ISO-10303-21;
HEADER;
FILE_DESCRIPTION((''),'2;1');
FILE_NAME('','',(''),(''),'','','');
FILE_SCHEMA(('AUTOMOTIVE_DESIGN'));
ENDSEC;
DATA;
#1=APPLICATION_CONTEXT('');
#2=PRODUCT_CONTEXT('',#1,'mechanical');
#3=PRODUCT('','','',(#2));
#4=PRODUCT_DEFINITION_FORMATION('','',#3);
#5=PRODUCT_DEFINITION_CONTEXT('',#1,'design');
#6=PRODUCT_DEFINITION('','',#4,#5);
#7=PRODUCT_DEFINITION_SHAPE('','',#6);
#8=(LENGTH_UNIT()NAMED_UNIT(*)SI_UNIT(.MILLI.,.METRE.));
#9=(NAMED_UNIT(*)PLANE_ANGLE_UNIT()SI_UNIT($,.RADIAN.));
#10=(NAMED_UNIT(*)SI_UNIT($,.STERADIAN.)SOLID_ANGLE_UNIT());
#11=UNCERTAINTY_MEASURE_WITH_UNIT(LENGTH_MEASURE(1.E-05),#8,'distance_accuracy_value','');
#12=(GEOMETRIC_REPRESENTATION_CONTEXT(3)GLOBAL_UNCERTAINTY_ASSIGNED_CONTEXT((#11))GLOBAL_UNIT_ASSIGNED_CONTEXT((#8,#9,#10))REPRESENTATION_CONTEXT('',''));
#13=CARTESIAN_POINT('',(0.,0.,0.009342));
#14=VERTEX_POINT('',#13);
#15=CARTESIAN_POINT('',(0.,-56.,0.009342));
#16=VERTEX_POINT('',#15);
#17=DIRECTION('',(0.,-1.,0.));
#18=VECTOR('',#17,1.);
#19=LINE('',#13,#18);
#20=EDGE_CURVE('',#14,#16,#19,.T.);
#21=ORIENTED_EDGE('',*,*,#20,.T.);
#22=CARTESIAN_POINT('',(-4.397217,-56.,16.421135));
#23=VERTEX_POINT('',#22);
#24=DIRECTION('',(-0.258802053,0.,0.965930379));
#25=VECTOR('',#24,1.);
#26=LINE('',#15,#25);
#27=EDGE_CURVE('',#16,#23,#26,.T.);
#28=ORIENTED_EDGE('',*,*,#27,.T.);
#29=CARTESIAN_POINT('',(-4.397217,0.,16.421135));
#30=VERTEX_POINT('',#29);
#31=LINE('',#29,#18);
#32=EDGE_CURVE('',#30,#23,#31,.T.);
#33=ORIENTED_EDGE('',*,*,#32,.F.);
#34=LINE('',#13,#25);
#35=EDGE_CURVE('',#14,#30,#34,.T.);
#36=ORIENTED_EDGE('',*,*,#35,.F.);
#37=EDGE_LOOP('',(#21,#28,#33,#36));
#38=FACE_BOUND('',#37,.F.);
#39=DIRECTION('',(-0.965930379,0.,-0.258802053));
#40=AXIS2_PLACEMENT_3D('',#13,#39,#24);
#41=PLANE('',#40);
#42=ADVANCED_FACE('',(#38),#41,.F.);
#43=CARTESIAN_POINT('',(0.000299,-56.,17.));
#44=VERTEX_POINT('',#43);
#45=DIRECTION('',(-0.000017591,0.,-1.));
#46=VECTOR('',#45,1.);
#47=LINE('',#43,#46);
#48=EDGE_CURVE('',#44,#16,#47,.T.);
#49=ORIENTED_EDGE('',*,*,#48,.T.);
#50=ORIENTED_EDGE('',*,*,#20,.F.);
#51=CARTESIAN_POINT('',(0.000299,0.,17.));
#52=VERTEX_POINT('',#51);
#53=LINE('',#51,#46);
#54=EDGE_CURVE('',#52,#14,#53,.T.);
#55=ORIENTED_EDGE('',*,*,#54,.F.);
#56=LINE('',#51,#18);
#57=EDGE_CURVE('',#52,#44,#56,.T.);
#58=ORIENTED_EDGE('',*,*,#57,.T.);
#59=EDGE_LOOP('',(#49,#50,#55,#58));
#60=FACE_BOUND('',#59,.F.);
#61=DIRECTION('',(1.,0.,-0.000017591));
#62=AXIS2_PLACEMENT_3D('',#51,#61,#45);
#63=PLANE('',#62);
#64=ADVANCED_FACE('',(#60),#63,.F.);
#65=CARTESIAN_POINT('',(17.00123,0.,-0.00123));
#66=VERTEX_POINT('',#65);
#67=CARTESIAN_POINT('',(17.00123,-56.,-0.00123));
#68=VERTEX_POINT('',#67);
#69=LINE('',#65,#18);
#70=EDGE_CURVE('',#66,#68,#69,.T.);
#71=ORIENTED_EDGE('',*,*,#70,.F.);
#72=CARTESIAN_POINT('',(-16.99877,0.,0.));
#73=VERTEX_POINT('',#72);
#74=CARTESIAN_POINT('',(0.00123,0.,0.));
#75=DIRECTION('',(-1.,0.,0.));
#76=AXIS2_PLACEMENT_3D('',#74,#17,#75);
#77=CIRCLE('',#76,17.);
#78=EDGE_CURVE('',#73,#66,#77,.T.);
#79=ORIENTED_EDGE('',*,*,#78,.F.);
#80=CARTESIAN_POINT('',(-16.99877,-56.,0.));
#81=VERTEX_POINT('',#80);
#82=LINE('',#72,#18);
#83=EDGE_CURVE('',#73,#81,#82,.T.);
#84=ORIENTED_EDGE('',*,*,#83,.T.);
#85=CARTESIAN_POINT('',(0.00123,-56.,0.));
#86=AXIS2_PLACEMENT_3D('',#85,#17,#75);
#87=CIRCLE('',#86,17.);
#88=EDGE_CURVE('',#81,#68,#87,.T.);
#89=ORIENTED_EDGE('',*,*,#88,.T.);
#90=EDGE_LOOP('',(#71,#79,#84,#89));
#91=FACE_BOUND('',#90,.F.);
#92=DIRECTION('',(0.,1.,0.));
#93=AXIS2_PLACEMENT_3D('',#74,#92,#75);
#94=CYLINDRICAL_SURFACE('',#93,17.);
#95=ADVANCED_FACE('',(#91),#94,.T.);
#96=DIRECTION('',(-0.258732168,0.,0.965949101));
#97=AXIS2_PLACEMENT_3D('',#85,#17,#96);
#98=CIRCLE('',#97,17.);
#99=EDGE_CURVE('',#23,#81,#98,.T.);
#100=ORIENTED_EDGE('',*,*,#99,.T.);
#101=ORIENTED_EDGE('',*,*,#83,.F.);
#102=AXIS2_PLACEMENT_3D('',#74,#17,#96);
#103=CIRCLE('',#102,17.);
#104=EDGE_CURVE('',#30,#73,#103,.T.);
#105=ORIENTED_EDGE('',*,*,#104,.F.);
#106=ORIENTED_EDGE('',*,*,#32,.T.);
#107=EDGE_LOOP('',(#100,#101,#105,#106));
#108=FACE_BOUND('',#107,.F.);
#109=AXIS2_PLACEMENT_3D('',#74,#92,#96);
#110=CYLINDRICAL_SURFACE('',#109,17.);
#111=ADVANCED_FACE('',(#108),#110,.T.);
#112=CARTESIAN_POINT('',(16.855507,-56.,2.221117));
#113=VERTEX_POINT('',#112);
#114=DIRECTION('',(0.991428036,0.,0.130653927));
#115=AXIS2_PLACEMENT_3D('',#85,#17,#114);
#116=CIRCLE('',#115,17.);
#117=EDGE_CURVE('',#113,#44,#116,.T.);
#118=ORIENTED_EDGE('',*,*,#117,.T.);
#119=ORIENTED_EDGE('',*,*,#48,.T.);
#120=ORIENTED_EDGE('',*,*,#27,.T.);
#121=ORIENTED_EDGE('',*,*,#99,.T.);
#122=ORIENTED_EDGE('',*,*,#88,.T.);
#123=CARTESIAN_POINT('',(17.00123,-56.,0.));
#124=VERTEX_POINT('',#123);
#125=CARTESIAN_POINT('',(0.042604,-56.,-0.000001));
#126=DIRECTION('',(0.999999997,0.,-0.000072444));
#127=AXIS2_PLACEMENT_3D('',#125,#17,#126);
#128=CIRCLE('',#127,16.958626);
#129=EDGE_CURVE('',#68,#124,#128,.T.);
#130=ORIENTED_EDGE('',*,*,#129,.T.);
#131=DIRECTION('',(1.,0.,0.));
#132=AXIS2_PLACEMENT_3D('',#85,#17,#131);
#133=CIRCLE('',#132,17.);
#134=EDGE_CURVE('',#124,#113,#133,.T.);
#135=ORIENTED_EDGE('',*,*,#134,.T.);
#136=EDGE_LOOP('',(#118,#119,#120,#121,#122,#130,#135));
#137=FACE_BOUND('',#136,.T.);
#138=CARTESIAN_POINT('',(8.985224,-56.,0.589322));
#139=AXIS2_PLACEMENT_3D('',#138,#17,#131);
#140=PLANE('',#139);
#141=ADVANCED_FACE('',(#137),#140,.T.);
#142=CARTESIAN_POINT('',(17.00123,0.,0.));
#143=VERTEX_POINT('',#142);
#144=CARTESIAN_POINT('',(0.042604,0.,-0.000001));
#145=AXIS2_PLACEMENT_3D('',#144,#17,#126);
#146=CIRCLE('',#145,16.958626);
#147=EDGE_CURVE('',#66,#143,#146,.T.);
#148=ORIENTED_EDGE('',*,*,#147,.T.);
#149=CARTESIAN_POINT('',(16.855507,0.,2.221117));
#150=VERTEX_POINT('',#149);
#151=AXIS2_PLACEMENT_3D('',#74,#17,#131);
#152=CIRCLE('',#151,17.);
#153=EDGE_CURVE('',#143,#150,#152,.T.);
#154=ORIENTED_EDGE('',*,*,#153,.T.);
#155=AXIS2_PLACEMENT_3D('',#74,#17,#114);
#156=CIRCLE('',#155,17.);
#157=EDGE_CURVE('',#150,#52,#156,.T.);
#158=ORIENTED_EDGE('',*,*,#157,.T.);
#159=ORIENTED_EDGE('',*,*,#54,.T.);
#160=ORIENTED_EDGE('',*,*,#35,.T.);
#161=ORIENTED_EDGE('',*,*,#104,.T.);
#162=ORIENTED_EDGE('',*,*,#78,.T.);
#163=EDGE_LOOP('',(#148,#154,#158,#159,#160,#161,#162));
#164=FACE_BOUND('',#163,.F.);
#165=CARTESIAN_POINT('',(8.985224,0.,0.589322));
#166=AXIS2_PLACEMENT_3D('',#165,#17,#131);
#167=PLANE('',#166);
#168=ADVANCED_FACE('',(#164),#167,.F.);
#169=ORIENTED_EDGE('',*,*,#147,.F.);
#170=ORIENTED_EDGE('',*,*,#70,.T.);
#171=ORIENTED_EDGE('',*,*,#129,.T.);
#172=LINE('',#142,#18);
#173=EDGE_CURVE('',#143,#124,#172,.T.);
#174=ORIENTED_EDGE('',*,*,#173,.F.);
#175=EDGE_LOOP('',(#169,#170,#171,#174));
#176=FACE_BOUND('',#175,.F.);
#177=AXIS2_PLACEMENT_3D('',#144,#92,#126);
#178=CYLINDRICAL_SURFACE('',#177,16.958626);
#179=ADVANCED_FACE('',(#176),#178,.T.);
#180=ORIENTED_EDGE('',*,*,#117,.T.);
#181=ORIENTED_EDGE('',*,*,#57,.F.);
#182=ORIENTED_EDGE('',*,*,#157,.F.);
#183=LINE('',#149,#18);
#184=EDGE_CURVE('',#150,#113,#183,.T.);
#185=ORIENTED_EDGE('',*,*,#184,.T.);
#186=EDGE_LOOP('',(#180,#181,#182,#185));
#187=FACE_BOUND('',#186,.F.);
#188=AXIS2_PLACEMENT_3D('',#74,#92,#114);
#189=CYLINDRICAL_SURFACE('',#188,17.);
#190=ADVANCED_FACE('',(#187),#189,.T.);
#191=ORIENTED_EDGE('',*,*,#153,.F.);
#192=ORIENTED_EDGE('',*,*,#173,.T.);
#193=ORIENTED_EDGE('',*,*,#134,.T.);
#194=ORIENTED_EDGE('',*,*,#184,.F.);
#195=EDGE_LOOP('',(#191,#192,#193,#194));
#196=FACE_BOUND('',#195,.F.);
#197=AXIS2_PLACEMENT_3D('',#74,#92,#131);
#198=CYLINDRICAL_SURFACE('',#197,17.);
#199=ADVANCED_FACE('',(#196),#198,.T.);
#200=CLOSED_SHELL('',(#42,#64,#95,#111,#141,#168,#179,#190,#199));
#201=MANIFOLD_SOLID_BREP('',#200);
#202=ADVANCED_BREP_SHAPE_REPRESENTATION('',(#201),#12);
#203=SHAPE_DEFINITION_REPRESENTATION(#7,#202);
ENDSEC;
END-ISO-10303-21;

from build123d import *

# Parameters (mm, degrees)
F1_DEPTH = 56
F3_DEPTH = 56


# Not quite as in the source:
# - a feature of the source that left no trace in its solid (it failed there, or was rolled back) is left out
# - a feature names something its author has since deleted; it is built from what else it names


with BuildPart() as f1:
    # F0 (on Front) → F1 (new body)
    with BuildSketch(Plane.XZ):
        with BuildLine():
            ThreePointArc((17.0012298637, -0.0012299217), (17.0012298971, -0.0006149604), (17.0012299082, 8e-10))
            ThreePointArc((17.0012299082, 8e-10), (16.9647599435, 1.1129459753), (16.8555065268, 2.2211167615))
            Line((16.8555065268, 2.2211167615), (0.0018881159, 0.0022958043))
            Line((0.0018881159, 0.0022958043), (0.0009440615, 0.0021715172))
            Line((0.0009440615, 0.0021715172), (0.0012299082, 8e-10))
            Line((0.0012299082, 8e-10), (6.4e-09, 8e-10))
            Line((-3.33e-08, 8e-10), (-5.49e-08, -0.0012299217))
            Line((-5.49e-08, -0.0012299217), (17.0012298637, -0.0012299217))
        make_face()
        with BuildLine():
            Line((0.0018881159, 0.0022958043), (16.8555065268, 2.2211167615))
            ThreePointArc((16.8555065268, 2.2211167615), (11.2089354185, 12.7823056298), (0.0002990162, 16.9999999754))
            Line((0.0002990162, 16.9999999754), (1.31e-07, 0.0093423556))
            Line((1.31e-07, 0.0093423556), (0.0018881159, 0.0022958043))
        make_face()
        with BuildLine():
            ThreePointArc((-16.9987700918, 8e-10), (0.0006149469, -16.999999988), (17.0012298637, -0.0012299217))
            Line((17.0012298637, -0.0012299217), (-5.49e-08, -0.0012299217))
            Line((-5.49e-08, -0.0012299217), (-3.33e-08, 8e-10))
            Line((-3.33e-08, 8e-10), (2.7e-09, 0.0020472295))
            Line((2.7e-09, 0.0020472295), (1.31e-07, 0.0093423556))
            Line((1.31e-07, 0.0093423556), (-4.3972169489, 16.4211347133))
            ThreePointArc((-4.3972169489, 16.4211347133), (-13.4853114678, 10.3495507986), (-16.9987700918, 8e-10))
        make_face()
        Polygon((0.0009440615, 0.0021715172), (0.0018881159, 0.0022958043), (1.31e-07, 0.0093423556), align=None)
        Polygon((0.0009440615, 0.0021715172), (1.31e-07, 0.0093423556), (2.7e-09, 0.0020472295), align=None)
        Polygon((0.0012299082, 8e-10), (0.0009440615, 0.0021715172), (2.7e-09, 0.0020472295), (-3.33e-08, 8e-10), align=None)
    extrude(amount=F1_DEPTH)

    # F0 (on Front) → F3 (cut)
    with BuildSketch(Plane.XZ):
        with BuildLine():
            Line((1.31e-07, 0.0093423556), (0.0002990162, 16.9999999754))
            ThreePointArc((0.0002990162, 16.9999999754), (-1.1109385334, 16.9635810307), (-2.2174188682, 16.8546016754))
            Line((-2.2174188682, 16.8546016754), (1.31e-07, 0.0093423556))
        make_face()
        with BuildLine():
            Line((1.31e-07, 0.0093423556), (-2.2174188682, 16.8546016754))
            ThreePointArc((-2.2174188682, 16.8546016754), (-3.3144091037, 16.6735280601), (-4.3972169489, 16.4211347133))
            Line((-4.3972169489, 16.4211347133), (1.31e-07, 0.0093423556))
        make_face()
    extrude(amount=F3_DEPTH, mode=Mode.SUBTRACT)


solid = f1.part
